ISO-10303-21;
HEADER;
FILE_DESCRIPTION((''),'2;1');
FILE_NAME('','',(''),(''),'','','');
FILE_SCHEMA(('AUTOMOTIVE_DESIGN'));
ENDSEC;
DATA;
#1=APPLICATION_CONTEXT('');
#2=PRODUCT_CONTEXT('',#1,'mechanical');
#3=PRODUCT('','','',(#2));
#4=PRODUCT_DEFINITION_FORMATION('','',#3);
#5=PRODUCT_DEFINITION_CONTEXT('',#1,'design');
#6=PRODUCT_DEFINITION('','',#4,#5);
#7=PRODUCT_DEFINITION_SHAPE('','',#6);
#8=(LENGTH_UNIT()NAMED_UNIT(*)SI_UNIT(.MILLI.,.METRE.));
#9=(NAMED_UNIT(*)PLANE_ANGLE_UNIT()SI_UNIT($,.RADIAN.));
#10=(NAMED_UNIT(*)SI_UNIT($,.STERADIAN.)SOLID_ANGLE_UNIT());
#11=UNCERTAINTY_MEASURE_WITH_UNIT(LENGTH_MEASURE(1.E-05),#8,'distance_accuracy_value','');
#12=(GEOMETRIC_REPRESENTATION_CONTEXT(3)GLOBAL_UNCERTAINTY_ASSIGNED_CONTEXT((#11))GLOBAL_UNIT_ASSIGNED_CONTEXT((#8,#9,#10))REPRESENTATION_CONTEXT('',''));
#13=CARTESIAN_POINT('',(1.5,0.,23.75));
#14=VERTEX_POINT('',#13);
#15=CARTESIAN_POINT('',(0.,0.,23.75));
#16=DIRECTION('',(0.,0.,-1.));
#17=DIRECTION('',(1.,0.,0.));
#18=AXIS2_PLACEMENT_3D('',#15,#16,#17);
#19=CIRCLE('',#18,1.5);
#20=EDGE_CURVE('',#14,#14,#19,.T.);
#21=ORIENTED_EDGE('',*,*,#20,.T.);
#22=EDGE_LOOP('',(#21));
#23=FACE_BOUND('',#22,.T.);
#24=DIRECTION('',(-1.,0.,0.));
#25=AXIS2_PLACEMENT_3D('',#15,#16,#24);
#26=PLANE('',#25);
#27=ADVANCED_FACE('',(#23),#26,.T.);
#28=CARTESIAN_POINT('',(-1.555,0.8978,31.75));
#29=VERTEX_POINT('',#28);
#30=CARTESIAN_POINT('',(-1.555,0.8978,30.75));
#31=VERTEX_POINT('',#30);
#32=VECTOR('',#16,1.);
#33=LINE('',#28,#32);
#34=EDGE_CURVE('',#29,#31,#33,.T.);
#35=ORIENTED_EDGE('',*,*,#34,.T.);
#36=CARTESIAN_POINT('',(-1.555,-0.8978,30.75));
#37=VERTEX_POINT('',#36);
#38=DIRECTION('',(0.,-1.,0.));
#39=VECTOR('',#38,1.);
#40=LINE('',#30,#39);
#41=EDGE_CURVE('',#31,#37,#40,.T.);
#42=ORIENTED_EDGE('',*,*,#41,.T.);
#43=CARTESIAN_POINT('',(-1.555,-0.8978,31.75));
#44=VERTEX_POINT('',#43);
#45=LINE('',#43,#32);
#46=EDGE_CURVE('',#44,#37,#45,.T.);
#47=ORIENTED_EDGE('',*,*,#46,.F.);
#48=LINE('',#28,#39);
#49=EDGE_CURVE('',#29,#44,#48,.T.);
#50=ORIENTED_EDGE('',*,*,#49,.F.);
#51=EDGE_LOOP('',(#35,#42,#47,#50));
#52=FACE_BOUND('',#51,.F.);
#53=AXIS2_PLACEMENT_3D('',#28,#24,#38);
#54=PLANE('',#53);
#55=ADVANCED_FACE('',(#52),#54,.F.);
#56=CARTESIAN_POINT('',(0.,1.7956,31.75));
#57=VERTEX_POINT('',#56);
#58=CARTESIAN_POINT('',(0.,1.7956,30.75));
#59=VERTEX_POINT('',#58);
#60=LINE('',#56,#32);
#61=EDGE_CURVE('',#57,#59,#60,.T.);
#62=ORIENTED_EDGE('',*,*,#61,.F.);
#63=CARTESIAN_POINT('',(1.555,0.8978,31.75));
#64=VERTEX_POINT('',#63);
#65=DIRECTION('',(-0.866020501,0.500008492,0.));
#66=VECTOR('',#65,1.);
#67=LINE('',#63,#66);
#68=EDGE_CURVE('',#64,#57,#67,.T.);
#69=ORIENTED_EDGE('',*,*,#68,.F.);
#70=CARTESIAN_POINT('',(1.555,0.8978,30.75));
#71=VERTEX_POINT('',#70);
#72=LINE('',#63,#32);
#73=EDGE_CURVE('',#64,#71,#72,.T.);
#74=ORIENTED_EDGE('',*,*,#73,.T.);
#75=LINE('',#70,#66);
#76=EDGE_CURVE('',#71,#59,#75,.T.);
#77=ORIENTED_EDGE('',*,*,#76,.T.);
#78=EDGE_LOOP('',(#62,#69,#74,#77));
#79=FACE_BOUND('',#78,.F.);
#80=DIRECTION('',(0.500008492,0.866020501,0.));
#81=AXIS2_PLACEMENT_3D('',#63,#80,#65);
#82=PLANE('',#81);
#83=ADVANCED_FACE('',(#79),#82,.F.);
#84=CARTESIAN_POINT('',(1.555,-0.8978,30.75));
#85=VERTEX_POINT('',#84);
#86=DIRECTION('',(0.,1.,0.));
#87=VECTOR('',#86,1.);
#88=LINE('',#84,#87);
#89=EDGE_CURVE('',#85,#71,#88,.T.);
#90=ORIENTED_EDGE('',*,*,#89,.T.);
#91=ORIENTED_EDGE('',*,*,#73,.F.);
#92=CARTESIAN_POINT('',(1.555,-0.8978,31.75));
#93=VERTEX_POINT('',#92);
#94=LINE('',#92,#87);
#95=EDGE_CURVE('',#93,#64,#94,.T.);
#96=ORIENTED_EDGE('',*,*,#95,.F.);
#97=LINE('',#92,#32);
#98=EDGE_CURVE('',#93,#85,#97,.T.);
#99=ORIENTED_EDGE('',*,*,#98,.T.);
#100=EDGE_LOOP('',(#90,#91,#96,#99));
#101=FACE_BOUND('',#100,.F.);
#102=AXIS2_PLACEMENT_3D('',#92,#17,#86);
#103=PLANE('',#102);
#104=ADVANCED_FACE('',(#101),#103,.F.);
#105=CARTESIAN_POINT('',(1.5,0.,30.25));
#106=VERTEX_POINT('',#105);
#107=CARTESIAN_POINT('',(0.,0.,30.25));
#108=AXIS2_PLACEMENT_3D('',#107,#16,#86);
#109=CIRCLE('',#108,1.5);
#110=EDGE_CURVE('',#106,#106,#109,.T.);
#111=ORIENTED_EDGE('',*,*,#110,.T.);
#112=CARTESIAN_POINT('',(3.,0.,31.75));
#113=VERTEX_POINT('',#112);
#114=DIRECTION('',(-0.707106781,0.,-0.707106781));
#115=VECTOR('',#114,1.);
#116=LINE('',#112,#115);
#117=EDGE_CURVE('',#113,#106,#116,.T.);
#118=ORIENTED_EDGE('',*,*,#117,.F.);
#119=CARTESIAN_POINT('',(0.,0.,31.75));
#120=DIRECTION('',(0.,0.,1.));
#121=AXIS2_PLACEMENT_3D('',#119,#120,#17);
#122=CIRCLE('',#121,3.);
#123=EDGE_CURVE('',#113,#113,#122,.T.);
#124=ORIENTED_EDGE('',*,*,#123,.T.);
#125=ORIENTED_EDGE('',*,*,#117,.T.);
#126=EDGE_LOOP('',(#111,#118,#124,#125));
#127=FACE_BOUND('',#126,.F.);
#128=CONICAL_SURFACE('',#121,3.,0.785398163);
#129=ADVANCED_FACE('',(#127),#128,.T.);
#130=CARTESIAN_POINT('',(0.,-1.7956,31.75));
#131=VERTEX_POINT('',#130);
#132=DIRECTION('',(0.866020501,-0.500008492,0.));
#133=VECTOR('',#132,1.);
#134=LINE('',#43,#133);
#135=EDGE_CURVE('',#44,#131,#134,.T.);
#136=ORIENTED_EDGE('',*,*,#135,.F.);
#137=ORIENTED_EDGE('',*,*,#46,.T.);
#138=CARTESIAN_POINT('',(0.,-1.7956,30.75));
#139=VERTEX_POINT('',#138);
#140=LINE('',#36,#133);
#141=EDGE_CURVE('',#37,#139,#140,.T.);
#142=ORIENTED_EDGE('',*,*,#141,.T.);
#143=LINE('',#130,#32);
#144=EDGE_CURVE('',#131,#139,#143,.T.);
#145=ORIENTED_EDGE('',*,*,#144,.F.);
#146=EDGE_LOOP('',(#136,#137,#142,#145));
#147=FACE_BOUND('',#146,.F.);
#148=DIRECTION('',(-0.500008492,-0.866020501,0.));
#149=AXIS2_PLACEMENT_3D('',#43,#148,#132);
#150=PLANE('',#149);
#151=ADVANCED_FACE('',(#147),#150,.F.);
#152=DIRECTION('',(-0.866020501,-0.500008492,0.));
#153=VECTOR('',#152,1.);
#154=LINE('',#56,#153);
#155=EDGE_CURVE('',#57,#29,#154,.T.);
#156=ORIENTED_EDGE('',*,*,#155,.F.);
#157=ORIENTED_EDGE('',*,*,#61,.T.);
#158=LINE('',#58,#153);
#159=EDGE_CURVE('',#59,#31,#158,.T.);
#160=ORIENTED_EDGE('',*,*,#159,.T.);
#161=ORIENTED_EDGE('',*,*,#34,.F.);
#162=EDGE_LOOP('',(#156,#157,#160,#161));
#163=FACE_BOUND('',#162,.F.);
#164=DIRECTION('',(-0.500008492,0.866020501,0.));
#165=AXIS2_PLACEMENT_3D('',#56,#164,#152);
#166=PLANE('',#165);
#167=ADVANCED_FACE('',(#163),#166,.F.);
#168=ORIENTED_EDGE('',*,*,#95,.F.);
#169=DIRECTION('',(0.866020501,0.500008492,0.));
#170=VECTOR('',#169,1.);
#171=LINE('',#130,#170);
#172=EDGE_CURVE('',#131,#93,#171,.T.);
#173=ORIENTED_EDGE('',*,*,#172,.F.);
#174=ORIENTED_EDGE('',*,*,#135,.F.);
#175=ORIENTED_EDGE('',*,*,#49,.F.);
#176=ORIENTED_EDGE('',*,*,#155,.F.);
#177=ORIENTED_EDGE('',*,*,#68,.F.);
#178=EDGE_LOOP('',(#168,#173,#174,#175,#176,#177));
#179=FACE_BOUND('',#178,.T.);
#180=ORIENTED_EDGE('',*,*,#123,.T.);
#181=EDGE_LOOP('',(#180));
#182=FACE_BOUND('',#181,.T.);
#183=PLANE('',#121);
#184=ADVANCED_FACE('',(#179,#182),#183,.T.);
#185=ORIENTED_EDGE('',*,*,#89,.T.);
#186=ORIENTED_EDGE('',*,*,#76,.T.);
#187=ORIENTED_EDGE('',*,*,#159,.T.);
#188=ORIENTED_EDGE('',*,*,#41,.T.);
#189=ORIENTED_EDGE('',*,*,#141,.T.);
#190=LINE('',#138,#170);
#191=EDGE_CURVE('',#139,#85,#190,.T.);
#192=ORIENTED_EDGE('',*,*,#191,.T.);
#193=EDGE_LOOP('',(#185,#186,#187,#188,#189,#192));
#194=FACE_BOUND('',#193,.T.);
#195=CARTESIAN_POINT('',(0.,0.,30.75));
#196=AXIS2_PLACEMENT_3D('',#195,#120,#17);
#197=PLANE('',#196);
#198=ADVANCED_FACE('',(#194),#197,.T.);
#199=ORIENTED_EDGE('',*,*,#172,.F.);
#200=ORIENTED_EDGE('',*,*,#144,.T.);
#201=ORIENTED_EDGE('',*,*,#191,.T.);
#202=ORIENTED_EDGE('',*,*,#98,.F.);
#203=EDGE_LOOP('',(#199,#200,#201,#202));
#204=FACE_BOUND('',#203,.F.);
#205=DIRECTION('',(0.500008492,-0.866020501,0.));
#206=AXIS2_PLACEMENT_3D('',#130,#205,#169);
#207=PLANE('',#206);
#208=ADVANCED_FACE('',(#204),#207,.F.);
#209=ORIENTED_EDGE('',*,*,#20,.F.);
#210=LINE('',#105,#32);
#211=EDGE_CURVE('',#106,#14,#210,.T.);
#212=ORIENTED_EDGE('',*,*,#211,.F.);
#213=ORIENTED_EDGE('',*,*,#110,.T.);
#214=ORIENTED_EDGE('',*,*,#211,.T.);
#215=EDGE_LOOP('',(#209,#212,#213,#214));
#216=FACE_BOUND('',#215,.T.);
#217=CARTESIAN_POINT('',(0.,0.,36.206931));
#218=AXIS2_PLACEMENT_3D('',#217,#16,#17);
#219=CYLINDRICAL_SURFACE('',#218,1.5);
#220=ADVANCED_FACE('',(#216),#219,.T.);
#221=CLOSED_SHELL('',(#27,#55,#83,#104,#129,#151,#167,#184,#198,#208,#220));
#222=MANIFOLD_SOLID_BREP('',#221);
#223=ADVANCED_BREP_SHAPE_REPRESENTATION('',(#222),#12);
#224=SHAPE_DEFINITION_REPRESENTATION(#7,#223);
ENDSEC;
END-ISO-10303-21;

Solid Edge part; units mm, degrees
sketch "Sketch1" plane through (0, 0, 0) normal (0, 0, 1) x (1, 0, 0)
  circle A0 centre (0, 0) radius 1.5
extrude "Protrusion1" add sketch "Sketch1" along normal blind 30
sketch "Sketch2" plane through (0, 0, 30) normal (0, 0, 1) x (1, 0, 0)
  circle A0 centre (0, 0) radius 3
extrude "ExtrudedProtrusion_2" add sketch "Sketch2" along normal blind 1.75
chamfer "Chamfer_1" distance 1.75 angle 45 1 edges at (-3, 0, 30)
sketch "Sketch3" plane through (0, 0, 31.75) normal (0, 0, 1) x (0, 1, 0)
  line L0 (0.8978, -1.555) -> (1.7956, 0)
  line L1 (1.7956, 0) -> (0.8978, 1.555)
  line L2 (0.8978, 1.555) -> (-0.8978, 1.555)
  line L3 (-0.8978, 1.555) -> (-1.7956, 0)
  line L4 (-1.7956, 0) -> (-0.8978, -1.555)
  line L5 (-0.8978, -1.555) -> (0.8978, -1.555)
extrude "ExtrudedCutout_1" cut sketch "Sketch3" against normal blind 1
sketch "Sketch4" plane through (0, 0, 0) normal (0, 0, -1) x (0, 1, 0)
  circle A0 centre (0, 0) radius 1.9215
extrude "ExtrudedCutout_2" cut sketch "Sketch4" against normal blind 23.75
properties material "Stainless Steel, 304"
